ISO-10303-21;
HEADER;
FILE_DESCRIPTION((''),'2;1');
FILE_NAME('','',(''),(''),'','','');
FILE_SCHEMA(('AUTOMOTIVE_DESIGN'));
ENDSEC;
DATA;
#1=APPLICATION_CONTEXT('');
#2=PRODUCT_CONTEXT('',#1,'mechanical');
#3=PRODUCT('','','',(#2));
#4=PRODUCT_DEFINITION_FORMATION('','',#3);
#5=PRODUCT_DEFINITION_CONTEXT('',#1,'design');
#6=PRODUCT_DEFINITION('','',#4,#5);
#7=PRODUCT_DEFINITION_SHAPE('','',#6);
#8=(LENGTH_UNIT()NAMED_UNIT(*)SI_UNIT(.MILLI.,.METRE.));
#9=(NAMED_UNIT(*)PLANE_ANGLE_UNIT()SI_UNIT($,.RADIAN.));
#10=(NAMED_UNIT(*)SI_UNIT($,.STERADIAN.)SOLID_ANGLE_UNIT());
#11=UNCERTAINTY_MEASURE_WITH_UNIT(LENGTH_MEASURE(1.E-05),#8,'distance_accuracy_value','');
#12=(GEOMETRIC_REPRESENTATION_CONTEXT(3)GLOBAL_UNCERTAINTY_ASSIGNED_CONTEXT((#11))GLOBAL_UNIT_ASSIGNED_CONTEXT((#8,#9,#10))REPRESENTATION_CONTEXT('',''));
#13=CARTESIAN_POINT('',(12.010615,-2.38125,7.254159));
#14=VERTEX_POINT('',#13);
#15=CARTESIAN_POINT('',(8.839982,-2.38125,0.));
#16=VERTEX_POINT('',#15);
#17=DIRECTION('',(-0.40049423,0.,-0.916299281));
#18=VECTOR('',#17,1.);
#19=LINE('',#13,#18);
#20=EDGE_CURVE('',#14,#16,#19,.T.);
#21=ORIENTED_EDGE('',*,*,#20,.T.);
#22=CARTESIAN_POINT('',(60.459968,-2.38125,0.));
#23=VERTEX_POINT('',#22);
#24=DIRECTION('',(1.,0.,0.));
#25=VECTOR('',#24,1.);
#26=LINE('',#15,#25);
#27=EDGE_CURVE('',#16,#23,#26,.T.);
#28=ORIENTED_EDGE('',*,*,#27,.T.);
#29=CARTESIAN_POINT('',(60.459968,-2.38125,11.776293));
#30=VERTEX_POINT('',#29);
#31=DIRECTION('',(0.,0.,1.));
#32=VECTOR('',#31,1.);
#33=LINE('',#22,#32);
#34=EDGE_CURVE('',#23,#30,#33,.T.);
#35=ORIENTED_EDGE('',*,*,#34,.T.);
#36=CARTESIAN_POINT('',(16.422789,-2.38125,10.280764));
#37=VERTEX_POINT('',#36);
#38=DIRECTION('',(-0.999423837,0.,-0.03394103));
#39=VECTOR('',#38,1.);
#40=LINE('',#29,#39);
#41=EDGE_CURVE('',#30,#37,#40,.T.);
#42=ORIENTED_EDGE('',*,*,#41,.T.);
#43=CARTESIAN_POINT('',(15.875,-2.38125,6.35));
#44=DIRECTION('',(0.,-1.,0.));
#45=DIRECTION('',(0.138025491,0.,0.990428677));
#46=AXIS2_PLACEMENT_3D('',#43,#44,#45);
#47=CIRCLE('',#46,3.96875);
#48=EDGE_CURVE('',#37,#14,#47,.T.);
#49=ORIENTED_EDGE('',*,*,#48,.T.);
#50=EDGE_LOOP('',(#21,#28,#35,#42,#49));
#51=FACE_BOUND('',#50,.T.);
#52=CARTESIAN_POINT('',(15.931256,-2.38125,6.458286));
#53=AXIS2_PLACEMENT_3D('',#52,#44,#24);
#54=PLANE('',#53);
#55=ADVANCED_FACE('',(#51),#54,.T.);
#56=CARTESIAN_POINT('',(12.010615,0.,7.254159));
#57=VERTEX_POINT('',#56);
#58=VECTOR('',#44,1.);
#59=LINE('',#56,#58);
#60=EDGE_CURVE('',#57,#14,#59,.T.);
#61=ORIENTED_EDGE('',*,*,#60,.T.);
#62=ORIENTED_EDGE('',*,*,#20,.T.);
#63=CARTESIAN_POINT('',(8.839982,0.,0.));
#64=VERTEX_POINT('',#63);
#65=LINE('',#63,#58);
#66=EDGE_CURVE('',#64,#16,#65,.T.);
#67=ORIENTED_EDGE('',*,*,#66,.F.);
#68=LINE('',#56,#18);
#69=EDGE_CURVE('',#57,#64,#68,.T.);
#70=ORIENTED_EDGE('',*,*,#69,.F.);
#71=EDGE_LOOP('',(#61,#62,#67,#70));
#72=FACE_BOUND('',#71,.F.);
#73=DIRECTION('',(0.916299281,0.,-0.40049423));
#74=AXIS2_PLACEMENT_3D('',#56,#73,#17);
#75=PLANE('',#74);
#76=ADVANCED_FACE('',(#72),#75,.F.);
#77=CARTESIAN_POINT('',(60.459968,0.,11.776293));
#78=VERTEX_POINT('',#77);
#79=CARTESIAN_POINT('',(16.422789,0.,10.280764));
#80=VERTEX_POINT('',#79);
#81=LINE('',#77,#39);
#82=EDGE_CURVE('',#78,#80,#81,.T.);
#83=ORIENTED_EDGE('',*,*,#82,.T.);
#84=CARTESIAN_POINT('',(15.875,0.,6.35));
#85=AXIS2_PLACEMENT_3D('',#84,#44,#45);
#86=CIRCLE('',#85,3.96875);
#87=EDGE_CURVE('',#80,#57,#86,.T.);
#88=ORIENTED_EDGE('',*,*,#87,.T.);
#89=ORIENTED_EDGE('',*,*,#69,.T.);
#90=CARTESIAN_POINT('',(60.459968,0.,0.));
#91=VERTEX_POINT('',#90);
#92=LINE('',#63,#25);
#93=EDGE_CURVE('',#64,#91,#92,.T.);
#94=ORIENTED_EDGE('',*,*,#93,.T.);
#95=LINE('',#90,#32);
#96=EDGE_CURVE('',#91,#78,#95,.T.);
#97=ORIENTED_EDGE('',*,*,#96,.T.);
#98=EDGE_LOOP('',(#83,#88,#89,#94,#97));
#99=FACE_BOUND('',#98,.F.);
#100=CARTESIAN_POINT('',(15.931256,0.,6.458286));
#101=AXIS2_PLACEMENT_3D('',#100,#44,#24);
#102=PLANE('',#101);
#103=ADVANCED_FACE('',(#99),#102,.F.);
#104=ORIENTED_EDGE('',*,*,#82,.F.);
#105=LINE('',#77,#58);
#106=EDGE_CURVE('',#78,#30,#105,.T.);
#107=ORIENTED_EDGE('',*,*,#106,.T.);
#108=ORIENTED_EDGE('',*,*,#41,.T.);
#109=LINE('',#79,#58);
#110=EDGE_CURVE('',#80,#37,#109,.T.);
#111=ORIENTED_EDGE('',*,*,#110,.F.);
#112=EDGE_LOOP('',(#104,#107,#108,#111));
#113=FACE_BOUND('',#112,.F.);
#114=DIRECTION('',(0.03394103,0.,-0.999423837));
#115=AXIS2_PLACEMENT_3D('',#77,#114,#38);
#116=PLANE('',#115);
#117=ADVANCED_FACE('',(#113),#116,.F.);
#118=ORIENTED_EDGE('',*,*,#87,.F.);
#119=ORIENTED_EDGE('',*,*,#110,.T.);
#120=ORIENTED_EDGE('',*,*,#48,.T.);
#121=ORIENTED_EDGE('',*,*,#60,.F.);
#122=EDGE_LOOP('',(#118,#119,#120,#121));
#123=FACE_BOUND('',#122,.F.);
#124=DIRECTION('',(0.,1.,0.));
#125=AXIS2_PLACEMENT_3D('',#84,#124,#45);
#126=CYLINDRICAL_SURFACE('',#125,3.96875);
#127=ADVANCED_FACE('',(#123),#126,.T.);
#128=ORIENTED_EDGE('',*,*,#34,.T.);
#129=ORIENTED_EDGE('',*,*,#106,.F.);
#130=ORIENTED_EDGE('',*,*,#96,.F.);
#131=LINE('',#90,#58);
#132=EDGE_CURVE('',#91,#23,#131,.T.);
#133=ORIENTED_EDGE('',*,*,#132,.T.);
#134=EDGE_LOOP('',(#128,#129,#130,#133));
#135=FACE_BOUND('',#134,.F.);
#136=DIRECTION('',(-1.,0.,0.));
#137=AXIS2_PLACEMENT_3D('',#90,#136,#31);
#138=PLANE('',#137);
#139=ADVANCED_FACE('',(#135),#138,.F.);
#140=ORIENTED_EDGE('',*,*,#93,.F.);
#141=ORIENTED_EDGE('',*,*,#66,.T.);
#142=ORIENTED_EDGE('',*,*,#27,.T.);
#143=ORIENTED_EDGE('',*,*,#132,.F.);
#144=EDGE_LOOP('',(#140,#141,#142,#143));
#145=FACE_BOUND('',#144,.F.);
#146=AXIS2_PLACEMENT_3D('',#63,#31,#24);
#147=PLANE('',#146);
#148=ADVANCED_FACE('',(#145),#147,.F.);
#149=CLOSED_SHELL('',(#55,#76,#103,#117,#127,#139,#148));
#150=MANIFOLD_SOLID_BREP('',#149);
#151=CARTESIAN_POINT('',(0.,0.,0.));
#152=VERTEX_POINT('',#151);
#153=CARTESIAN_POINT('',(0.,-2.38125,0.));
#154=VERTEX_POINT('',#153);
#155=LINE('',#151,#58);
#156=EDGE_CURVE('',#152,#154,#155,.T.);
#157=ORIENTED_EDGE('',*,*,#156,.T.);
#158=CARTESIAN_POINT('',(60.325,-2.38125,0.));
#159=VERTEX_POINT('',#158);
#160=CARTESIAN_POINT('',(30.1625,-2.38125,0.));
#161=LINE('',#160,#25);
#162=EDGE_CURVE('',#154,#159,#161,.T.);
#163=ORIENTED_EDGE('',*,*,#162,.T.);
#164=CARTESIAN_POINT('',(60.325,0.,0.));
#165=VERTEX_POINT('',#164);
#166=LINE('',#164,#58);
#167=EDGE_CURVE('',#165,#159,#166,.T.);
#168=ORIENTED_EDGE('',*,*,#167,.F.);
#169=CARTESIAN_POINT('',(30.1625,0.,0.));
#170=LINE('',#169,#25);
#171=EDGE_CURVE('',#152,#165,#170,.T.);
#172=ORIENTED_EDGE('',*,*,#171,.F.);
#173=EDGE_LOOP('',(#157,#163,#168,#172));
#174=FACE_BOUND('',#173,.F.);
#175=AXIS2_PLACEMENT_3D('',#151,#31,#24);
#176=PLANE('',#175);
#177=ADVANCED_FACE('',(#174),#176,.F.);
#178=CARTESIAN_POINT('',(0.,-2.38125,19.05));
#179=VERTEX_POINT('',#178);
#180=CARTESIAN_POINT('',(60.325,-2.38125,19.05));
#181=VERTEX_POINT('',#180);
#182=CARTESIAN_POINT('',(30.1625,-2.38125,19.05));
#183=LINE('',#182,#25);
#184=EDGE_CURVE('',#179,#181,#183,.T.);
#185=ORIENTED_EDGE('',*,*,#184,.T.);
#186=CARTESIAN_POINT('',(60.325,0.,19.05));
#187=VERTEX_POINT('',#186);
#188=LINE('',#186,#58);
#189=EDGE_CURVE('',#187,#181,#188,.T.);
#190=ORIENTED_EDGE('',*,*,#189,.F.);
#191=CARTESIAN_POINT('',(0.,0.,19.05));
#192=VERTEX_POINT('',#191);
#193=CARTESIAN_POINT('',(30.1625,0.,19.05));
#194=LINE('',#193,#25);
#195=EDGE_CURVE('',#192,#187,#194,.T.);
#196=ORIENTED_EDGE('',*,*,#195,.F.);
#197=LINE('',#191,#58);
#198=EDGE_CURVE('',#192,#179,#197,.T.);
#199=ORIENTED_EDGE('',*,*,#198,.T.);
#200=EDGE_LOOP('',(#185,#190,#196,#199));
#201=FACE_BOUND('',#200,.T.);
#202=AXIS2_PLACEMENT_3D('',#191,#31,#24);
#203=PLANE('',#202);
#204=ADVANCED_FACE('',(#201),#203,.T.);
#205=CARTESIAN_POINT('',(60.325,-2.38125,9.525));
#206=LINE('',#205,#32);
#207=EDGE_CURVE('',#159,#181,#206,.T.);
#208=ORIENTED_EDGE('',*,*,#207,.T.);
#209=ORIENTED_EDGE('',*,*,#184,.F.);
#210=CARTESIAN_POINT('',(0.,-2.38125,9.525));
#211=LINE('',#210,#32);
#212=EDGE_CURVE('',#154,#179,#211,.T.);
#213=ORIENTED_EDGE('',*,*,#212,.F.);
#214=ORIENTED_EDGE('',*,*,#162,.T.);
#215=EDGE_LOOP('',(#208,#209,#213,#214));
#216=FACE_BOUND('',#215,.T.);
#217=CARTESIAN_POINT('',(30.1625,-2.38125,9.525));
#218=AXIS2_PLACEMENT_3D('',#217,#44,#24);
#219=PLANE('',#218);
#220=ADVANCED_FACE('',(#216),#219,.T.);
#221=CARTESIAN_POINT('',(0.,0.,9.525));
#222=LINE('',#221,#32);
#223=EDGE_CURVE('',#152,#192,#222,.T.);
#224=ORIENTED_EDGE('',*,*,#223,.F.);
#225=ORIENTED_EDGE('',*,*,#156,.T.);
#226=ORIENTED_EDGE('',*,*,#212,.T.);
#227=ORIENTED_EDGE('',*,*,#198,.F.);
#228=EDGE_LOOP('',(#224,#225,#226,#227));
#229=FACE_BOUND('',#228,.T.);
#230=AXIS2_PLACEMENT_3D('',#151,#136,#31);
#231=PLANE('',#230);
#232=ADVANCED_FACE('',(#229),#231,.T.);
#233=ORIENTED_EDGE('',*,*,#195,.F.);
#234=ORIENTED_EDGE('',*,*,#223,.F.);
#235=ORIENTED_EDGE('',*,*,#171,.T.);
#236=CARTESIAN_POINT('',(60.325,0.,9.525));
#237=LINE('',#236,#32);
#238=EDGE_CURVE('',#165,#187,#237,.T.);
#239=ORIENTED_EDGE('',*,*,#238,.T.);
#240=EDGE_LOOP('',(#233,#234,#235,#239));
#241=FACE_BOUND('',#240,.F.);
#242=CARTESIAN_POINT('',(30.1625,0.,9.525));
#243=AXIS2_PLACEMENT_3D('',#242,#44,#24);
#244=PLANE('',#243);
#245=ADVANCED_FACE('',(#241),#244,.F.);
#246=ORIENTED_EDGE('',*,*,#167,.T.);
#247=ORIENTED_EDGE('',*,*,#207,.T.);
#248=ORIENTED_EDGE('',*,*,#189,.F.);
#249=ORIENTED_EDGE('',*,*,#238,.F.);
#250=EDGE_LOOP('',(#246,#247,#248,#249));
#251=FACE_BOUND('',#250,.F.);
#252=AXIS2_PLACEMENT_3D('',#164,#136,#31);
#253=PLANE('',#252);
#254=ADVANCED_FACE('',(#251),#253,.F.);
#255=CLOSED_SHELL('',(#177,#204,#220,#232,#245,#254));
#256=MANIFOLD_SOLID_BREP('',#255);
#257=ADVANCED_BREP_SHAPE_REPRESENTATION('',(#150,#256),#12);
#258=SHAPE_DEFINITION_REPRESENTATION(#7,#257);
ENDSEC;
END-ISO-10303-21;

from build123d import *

# Parameters (mm, degrees)
F2_DEPTH = 2.38125
F0_W     = 60.325
F0_H     = 19.05


# Not quite as in the source:
# - a feature of the source that left no trace in its solid (it failed there, or was rolled back) is left out


with BuildPart() as f2:
    # F1 (on Front) → F2 (new body)
    with BuildSketch(Plane.XZ):
        with BuildLine():
            ThreePointArc((12.0106148621, 7.2541593159), (15.4199186631, 2.407427548), (19.84375, 6.35))
            ThreePointArc((19.84375, 6.35), (18.8687445476, 8.9554692756), (16.4227886665, 10.2807638112))
            ThreePointArc((16.4227886665, 10.2807638112), (13.7755602888, 9.4105561157), (12.0106148621, 7.2541593159))
        make_face()
        with BuildLine():
            ThreePointArc((16.4227886665, 10.2807638112), (18.8687445476, 8.9554692756), (19.84375, 6.35))
            ThreePointArc((19.84375, 6.35), (15.4199186631, 2.407427548), (12.0106148621, 7.2541593159))
            Line((12.0106148621, 7.2541593159), (8.8399816304, 0))
            Line((8.8399816304, 0), (60.4599677026, 0))
            Line((60.4599677026, 0), (60.4599677026, 11.7762926966))
            Line((60.4599677026, 11.7762926966), (16.4227886665, 10.2807638112))
        make_face()
        with BuildLine():
            ThreePointArc((12.0106148621, 7.2541593159), (13.7755602888, 9.4105561157), (16.4227886665, 10.2807638112))
            ThreePointArc((16.4227886665, 10.2807638112), (13.6299973872, 9.6227572216), (12.0106148621, 7.2541593159))
        make_face()
    extrude(amount=F2_DEPTH)


with BuildPart() as f2b:
    # F0 (on Front) → F2, piece 2 (new body)
    with BuildSketch(Plane.XZ):
        with Locations((30.1625, 9.525)):
            Rectangle(F0_W, F0_H)
    extrude(amount=F2_DEPTH)


solid = Compound([f2.part, f2b.part])
